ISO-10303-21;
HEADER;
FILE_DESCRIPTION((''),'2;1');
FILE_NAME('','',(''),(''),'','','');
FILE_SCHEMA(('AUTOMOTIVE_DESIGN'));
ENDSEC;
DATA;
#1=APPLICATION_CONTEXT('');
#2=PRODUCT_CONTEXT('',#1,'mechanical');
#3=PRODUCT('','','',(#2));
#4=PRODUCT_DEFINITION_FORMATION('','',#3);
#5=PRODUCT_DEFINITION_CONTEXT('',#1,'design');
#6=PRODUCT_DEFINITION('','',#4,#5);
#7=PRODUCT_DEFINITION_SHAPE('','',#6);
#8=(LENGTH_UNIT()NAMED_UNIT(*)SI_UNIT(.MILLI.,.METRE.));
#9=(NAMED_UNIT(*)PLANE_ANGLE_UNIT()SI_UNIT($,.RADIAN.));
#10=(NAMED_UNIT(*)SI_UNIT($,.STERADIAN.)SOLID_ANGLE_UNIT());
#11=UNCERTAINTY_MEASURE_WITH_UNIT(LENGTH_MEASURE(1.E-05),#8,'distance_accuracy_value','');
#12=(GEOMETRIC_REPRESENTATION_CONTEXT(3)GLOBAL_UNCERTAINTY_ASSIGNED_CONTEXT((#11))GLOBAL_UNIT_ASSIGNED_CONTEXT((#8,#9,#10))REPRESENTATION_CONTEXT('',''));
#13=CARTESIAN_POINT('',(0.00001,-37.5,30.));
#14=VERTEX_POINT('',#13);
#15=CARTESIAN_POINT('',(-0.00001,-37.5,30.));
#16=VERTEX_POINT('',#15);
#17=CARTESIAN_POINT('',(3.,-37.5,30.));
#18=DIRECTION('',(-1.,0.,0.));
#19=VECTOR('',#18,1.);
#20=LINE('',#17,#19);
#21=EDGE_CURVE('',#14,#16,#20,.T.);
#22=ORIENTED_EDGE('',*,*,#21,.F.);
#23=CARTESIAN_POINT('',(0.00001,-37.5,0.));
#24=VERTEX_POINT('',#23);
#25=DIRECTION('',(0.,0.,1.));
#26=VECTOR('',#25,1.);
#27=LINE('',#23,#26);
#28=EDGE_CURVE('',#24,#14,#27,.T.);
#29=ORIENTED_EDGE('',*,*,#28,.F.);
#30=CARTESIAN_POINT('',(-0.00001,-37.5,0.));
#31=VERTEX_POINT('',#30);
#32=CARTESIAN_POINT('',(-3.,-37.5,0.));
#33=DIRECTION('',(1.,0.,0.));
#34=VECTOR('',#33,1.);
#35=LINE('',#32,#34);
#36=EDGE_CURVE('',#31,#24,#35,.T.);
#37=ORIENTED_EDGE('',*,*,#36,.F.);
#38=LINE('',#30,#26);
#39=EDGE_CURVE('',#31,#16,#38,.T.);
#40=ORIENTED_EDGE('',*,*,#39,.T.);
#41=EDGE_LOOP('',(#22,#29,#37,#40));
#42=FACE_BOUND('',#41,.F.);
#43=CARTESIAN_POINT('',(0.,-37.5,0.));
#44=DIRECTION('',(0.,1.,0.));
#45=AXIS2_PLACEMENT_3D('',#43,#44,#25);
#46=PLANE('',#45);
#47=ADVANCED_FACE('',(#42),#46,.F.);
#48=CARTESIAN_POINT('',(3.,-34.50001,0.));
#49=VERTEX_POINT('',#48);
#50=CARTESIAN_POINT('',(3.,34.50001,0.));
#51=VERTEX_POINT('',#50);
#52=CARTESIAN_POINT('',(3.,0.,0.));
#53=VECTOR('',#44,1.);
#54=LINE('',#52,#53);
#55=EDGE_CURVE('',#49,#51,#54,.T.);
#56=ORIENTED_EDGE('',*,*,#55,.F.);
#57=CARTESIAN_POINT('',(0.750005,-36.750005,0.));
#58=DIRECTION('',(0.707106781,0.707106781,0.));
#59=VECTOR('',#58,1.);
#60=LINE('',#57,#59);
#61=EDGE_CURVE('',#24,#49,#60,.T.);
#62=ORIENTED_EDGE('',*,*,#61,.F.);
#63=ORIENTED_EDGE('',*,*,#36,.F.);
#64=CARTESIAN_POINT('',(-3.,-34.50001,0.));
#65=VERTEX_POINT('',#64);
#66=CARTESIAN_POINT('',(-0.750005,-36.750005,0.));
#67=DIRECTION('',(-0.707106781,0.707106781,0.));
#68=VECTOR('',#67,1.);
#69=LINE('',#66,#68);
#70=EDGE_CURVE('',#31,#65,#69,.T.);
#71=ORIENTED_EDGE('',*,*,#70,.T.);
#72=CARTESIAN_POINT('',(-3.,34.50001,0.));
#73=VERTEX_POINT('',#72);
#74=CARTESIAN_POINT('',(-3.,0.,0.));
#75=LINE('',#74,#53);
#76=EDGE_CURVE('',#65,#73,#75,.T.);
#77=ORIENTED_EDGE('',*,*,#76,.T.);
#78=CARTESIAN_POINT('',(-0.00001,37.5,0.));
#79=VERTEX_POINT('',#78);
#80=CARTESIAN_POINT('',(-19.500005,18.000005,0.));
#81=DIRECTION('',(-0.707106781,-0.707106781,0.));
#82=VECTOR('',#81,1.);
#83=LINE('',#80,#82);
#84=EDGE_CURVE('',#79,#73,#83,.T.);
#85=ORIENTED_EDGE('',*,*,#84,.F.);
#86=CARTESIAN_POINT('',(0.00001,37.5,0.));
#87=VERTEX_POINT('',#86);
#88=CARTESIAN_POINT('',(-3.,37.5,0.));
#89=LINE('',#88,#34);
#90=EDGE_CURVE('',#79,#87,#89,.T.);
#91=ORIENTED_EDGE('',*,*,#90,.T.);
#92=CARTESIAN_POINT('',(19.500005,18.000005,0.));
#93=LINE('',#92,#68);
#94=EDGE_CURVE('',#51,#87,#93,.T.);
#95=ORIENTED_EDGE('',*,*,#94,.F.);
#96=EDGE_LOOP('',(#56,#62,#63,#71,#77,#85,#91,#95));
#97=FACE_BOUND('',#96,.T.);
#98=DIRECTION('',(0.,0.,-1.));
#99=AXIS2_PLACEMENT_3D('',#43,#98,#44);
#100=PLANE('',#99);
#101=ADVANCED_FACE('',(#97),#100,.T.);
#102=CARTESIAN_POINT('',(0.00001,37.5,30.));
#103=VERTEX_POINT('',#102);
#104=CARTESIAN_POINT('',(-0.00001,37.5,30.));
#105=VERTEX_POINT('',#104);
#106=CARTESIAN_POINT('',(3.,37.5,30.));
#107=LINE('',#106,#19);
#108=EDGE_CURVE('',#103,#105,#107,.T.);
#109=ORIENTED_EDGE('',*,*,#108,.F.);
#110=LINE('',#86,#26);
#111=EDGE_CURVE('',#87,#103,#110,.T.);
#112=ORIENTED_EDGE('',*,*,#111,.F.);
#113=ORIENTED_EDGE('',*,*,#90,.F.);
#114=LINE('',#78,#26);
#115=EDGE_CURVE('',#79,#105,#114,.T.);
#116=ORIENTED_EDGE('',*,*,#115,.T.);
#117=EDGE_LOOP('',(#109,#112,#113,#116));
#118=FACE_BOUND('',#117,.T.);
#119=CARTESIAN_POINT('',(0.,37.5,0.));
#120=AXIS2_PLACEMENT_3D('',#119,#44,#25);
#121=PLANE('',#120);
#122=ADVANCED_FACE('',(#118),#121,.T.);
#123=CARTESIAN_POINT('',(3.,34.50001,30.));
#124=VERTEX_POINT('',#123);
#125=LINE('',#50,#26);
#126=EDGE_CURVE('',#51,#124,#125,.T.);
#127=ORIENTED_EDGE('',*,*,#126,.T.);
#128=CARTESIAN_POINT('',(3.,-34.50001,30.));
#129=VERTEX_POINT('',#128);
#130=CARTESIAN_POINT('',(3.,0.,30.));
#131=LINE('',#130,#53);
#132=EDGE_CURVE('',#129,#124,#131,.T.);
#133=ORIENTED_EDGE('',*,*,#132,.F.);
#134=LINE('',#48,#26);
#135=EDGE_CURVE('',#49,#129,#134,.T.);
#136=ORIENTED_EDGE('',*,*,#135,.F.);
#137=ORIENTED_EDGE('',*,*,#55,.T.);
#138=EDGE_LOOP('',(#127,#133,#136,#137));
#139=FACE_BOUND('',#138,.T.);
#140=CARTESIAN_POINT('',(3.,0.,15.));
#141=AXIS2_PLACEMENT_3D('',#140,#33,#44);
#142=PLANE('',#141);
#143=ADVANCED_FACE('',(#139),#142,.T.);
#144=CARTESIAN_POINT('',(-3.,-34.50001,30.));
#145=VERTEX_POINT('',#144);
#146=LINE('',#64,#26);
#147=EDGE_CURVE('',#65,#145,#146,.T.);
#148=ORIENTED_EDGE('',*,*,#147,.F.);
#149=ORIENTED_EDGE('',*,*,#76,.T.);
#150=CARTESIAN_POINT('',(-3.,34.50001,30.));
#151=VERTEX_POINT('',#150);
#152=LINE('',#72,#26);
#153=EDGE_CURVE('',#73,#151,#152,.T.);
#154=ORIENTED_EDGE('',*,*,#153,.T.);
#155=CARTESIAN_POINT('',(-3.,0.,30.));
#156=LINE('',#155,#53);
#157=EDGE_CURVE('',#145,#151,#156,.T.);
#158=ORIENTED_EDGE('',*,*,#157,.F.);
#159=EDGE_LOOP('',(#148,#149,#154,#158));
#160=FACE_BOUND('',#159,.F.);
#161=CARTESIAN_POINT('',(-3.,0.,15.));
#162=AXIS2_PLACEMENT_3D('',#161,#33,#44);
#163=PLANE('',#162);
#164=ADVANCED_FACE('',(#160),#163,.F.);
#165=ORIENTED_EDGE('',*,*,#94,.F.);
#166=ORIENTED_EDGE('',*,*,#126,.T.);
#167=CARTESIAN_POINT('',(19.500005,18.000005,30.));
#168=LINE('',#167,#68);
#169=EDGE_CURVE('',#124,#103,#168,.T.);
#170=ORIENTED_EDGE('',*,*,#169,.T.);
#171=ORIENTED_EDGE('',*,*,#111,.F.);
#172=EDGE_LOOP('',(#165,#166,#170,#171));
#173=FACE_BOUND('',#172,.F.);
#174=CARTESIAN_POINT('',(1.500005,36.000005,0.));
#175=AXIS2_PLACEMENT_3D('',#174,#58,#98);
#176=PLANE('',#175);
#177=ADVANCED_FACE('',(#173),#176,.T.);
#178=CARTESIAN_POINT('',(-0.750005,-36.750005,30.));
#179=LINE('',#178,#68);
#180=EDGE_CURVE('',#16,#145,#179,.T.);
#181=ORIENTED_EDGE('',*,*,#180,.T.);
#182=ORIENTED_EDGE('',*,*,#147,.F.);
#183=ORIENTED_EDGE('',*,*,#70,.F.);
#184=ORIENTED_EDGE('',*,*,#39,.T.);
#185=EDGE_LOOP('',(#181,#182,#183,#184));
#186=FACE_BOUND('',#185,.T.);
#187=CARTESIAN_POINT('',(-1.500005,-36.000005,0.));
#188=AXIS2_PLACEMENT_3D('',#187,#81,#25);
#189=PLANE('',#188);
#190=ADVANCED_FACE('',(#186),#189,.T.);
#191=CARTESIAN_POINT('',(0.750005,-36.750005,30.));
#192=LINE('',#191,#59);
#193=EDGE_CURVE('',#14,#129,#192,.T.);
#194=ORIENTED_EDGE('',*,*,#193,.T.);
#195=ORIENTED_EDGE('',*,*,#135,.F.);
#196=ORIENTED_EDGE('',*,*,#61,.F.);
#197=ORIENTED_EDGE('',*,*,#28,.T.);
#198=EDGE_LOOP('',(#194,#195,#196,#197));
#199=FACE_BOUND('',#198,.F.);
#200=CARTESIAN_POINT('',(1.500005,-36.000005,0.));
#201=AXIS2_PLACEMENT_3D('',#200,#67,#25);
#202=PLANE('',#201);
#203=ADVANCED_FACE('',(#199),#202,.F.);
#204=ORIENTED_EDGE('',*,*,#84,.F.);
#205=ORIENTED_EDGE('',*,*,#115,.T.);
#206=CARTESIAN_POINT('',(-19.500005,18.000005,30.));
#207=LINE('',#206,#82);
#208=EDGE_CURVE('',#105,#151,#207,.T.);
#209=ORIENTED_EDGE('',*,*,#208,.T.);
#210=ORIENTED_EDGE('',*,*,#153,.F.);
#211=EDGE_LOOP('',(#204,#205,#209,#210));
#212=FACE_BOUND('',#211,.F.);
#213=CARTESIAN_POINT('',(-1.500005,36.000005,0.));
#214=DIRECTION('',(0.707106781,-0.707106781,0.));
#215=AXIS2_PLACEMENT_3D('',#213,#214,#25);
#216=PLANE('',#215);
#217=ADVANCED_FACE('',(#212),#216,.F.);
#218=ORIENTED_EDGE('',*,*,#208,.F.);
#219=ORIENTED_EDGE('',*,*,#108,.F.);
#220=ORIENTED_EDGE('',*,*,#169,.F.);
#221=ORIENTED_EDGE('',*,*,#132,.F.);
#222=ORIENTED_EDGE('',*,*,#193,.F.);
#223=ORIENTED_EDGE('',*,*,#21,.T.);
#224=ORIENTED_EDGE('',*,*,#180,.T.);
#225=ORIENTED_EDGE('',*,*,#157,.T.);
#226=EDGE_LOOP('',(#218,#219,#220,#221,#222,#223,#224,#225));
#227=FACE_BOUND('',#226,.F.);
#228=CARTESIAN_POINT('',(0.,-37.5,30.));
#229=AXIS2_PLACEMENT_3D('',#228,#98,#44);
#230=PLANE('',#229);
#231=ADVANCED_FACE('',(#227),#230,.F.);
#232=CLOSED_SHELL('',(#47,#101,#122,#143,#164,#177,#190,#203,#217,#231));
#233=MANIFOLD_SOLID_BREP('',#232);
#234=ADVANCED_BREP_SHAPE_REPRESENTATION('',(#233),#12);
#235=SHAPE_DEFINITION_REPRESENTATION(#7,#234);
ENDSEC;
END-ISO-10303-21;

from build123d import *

# Parameters (mm, degrees)
F0_W     = 75
F0_H     = 30
F1_DEPTH = 3
F2_SIZE  = 2.99999


# Not quite as in the source:
# - a fillet or chamfer is up to 0.001 mm smaller than in the source, because OpenCascade refuses the exact size


with BuildPart() as f1:
    # F0 (on Right) → F1 (new body, symmetric)
    with BuildSketch(Plane.YZ):
        with Locations((0, 15)):
            Rectangle(F0_W, F0_H)
    extrude(amount=F1_DEPTH, both=True)

    # F2 (size 3 in the source; OpenCascade refuses exactly that, so slightly less here)
    f2_edges = [f1.edges().sort_by_distance(p)[0] for p in [
        (3, -37.5, 15),
        (-3, -37.5, 15),
        (-3, 37.5, 15),
        (3, 37.5, 15),
    ]]
    chamfer(f2_edges, length=F2_SIZE)


solid = f1.part
